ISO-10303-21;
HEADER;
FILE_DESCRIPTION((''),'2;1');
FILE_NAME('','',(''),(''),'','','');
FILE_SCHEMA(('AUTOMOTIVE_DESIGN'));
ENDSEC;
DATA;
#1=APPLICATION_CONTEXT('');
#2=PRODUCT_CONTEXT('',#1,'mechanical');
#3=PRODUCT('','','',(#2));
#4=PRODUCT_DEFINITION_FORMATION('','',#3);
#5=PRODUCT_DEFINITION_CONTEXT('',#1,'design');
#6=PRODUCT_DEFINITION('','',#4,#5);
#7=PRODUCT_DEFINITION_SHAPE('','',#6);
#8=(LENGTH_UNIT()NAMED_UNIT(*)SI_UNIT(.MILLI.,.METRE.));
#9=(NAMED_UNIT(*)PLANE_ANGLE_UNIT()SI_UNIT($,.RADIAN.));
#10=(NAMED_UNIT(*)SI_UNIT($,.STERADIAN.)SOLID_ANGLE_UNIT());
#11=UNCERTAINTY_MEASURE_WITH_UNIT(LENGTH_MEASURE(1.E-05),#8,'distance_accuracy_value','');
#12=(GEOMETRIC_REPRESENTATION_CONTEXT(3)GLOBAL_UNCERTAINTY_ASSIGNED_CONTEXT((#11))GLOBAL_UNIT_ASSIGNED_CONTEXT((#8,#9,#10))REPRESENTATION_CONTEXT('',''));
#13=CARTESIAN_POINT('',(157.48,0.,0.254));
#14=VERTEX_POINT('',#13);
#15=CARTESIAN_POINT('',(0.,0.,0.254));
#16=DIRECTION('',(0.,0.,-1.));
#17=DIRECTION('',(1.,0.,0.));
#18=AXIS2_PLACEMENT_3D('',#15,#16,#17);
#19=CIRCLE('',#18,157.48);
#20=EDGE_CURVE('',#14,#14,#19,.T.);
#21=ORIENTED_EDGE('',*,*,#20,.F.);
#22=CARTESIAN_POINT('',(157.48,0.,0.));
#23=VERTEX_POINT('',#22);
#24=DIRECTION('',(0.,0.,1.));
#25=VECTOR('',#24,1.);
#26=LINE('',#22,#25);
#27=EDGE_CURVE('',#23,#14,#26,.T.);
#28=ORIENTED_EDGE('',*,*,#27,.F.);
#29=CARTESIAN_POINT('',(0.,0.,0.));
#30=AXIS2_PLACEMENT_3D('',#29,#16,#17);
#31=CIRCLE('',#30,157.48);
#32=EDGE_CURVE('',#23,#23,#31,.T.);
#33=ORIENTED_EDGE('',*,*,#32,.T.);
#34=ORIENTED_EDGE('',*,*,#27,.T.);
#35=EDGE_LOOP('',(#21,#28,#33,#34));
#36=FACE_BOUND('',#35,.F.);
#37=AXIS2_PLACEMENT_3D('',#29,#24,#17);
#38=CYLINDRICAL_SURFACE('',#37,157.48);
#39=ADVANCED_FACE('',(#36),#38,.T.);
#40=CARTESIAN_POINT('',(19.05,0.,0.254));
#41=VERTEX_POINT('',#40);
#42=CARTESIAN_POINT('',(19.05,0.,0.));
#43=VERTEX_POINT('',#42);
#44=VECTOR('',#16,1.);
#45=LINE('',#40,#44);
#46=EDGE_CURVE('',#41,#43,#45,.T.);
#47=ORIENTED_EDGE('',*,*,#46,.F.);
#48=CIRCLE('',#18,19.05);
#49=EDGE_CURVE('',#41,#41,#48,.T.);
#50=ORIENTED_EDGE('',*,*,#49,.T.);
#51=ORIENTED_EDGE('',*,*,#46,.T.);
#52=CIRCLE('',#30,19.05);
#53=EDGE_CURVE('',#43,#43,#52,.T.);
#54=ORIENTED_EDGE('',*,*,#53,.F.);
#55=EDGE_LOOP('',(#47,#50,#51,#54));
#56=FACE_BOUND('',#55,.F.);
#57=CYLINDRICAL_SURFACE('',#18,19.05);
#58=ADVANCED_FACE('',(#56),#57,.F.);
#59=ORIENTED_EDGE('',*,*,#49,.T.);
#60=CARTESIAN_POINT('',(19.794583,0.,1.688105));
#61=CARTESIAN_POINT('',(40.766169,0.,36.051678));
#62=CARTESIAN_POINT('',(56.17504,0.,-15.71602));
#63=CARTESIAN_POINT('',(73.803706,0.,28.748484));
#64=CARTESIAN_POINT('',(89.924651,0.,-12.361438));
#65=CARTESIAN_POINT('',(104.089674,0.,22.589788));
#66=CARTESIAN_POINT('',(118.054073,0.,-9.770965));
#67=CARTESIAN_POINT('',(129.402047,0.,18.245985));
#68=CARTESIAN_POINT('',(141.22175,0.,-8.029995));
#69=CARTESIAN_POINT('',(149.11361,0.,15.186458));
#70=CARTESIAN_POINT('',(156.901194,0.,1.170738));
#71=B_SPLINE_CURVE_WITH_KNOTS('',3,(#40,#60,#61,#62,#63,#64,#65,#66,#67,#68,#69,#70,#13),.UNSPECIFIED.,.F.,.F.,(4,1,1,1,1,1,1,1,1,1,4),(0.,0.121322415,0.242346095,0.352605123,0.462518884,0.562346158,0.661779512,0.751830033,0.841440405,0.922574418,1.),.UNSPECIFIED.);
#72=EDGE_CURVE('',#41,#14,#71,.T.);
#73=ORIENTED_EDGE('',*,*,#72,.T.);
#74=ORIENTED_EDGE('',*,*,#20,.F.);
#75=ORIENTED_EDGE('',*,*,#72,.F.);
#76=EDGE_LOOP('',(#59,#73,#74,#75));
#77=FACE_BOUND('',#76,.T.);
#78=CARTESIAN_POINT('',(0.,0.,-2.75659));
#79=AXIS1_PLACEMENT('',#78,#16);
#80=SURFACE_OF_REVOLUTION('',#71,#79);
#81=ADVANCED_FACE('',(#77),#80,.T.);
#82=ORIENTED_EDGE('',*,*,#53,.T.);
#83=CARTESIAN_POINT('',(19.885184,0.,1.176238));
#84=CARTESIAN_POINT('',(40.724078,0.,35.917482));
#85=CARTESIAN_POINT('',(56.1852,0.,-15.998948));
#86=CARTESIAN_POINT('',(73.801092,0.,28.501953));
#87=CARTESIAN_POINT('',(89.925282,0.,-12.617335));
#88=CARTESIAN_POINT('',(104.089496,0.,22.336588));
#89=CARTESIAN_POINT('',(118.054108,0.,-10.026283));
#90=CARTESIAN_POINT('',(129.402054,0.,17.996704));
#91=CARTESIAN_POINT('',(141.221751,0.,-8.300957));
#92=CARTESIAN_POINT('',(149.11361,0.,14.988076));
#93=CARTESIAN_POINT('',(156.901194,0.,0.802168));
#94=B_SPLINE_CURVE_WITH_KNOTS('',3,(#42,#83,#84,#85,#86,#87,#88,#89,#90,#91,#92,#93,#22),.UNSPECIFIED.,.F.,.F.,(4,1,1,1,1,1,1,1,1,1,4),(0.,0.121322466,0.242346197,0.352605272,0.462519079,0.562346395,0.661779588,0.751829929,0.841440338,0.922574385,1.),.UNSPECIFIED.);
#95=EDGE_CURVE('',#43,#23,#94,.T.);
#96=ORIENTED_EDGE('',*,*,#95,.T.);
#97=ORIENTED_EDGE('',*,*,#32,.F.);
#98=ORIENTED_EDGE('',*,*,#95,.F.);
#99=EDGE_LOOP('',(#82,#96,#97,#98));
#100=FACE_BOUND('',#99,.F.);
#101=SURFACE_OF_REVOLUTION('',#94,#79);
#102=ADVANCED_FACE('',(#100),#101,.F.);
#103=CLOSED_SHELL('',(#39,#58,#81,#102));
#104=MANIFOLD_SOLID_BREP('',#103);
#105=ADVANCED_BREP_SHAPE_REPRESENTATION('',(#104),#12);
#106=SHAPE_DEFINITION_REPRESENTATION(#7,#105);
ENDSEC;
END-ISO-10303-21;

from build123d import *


with BuildPart() as f1:
    # F0 (on Front) → F1 (revolve)
    with BuildSketch(Plane.XZ):
        with BuildLine():
            Line((19.05, 0.254), (19.05, 0))
            add(Edge.make_bspline(
                [(19.05, 0), (19.8851835798, 1.1762377257), (40.7240775716, 35.917482442), (56.1852002036, -15.9989475478), (73.8010916579, 28.5019531694), (89.9252818373, -12.6173352435), (104.0894959727, 22.3365876708), (118.0541077279, -10.026283404), (129.4020541963, 17.996704012), (141.2217508471, -8.300957433), (149.1136098889, 14.9880755506), (156.9011944456, 0.802167557), (157.48, 0)],
                knots=[0, 0, 0, 0, 0.1213224661, 0.242346197, 0.3526052717, 0.4625190791, 0.5623463952, 0.6617795883, 0.7518299287, 0.8414403378, 0.9225743849, 1, 1, 1, 1], degree=3))
            Line((157.48, 0), (157.48, 0.254))
            add(Edge.make_bspline(
                [(19.05, 0.254), (19.7945829304, 1.6881054483), (40.766169356, 36.0516781984), (56.1750397608, -15.7160203667), (73.8037060447, 28.7484836229), (89.9246510286, -12.3614377588), (104.0896740484, 22.5897884294), (118.0540728767, -9.7709649323), (129.4020466206, 18.2459853097), (141.2217502728, -8.0299945859), (149.1136100382, 15.1864577427), (156.9011944456, 1.1707379802), (157.48, 0.254)],
                knots=[0, 0, 0, 0, 0.1213224149, 0.2423460946, 0.3526051227, 0.4625188837, 0.5623461576, 0.6617795115, 0.7518300335, 0.8414404049, 0.9225744176, 1, 1, 1, 1], degree=3))
        make_face()
    revolve(axis=Axis((0, 0, -2.7565898238), (0, 0, -1)))


solid = f1.part
